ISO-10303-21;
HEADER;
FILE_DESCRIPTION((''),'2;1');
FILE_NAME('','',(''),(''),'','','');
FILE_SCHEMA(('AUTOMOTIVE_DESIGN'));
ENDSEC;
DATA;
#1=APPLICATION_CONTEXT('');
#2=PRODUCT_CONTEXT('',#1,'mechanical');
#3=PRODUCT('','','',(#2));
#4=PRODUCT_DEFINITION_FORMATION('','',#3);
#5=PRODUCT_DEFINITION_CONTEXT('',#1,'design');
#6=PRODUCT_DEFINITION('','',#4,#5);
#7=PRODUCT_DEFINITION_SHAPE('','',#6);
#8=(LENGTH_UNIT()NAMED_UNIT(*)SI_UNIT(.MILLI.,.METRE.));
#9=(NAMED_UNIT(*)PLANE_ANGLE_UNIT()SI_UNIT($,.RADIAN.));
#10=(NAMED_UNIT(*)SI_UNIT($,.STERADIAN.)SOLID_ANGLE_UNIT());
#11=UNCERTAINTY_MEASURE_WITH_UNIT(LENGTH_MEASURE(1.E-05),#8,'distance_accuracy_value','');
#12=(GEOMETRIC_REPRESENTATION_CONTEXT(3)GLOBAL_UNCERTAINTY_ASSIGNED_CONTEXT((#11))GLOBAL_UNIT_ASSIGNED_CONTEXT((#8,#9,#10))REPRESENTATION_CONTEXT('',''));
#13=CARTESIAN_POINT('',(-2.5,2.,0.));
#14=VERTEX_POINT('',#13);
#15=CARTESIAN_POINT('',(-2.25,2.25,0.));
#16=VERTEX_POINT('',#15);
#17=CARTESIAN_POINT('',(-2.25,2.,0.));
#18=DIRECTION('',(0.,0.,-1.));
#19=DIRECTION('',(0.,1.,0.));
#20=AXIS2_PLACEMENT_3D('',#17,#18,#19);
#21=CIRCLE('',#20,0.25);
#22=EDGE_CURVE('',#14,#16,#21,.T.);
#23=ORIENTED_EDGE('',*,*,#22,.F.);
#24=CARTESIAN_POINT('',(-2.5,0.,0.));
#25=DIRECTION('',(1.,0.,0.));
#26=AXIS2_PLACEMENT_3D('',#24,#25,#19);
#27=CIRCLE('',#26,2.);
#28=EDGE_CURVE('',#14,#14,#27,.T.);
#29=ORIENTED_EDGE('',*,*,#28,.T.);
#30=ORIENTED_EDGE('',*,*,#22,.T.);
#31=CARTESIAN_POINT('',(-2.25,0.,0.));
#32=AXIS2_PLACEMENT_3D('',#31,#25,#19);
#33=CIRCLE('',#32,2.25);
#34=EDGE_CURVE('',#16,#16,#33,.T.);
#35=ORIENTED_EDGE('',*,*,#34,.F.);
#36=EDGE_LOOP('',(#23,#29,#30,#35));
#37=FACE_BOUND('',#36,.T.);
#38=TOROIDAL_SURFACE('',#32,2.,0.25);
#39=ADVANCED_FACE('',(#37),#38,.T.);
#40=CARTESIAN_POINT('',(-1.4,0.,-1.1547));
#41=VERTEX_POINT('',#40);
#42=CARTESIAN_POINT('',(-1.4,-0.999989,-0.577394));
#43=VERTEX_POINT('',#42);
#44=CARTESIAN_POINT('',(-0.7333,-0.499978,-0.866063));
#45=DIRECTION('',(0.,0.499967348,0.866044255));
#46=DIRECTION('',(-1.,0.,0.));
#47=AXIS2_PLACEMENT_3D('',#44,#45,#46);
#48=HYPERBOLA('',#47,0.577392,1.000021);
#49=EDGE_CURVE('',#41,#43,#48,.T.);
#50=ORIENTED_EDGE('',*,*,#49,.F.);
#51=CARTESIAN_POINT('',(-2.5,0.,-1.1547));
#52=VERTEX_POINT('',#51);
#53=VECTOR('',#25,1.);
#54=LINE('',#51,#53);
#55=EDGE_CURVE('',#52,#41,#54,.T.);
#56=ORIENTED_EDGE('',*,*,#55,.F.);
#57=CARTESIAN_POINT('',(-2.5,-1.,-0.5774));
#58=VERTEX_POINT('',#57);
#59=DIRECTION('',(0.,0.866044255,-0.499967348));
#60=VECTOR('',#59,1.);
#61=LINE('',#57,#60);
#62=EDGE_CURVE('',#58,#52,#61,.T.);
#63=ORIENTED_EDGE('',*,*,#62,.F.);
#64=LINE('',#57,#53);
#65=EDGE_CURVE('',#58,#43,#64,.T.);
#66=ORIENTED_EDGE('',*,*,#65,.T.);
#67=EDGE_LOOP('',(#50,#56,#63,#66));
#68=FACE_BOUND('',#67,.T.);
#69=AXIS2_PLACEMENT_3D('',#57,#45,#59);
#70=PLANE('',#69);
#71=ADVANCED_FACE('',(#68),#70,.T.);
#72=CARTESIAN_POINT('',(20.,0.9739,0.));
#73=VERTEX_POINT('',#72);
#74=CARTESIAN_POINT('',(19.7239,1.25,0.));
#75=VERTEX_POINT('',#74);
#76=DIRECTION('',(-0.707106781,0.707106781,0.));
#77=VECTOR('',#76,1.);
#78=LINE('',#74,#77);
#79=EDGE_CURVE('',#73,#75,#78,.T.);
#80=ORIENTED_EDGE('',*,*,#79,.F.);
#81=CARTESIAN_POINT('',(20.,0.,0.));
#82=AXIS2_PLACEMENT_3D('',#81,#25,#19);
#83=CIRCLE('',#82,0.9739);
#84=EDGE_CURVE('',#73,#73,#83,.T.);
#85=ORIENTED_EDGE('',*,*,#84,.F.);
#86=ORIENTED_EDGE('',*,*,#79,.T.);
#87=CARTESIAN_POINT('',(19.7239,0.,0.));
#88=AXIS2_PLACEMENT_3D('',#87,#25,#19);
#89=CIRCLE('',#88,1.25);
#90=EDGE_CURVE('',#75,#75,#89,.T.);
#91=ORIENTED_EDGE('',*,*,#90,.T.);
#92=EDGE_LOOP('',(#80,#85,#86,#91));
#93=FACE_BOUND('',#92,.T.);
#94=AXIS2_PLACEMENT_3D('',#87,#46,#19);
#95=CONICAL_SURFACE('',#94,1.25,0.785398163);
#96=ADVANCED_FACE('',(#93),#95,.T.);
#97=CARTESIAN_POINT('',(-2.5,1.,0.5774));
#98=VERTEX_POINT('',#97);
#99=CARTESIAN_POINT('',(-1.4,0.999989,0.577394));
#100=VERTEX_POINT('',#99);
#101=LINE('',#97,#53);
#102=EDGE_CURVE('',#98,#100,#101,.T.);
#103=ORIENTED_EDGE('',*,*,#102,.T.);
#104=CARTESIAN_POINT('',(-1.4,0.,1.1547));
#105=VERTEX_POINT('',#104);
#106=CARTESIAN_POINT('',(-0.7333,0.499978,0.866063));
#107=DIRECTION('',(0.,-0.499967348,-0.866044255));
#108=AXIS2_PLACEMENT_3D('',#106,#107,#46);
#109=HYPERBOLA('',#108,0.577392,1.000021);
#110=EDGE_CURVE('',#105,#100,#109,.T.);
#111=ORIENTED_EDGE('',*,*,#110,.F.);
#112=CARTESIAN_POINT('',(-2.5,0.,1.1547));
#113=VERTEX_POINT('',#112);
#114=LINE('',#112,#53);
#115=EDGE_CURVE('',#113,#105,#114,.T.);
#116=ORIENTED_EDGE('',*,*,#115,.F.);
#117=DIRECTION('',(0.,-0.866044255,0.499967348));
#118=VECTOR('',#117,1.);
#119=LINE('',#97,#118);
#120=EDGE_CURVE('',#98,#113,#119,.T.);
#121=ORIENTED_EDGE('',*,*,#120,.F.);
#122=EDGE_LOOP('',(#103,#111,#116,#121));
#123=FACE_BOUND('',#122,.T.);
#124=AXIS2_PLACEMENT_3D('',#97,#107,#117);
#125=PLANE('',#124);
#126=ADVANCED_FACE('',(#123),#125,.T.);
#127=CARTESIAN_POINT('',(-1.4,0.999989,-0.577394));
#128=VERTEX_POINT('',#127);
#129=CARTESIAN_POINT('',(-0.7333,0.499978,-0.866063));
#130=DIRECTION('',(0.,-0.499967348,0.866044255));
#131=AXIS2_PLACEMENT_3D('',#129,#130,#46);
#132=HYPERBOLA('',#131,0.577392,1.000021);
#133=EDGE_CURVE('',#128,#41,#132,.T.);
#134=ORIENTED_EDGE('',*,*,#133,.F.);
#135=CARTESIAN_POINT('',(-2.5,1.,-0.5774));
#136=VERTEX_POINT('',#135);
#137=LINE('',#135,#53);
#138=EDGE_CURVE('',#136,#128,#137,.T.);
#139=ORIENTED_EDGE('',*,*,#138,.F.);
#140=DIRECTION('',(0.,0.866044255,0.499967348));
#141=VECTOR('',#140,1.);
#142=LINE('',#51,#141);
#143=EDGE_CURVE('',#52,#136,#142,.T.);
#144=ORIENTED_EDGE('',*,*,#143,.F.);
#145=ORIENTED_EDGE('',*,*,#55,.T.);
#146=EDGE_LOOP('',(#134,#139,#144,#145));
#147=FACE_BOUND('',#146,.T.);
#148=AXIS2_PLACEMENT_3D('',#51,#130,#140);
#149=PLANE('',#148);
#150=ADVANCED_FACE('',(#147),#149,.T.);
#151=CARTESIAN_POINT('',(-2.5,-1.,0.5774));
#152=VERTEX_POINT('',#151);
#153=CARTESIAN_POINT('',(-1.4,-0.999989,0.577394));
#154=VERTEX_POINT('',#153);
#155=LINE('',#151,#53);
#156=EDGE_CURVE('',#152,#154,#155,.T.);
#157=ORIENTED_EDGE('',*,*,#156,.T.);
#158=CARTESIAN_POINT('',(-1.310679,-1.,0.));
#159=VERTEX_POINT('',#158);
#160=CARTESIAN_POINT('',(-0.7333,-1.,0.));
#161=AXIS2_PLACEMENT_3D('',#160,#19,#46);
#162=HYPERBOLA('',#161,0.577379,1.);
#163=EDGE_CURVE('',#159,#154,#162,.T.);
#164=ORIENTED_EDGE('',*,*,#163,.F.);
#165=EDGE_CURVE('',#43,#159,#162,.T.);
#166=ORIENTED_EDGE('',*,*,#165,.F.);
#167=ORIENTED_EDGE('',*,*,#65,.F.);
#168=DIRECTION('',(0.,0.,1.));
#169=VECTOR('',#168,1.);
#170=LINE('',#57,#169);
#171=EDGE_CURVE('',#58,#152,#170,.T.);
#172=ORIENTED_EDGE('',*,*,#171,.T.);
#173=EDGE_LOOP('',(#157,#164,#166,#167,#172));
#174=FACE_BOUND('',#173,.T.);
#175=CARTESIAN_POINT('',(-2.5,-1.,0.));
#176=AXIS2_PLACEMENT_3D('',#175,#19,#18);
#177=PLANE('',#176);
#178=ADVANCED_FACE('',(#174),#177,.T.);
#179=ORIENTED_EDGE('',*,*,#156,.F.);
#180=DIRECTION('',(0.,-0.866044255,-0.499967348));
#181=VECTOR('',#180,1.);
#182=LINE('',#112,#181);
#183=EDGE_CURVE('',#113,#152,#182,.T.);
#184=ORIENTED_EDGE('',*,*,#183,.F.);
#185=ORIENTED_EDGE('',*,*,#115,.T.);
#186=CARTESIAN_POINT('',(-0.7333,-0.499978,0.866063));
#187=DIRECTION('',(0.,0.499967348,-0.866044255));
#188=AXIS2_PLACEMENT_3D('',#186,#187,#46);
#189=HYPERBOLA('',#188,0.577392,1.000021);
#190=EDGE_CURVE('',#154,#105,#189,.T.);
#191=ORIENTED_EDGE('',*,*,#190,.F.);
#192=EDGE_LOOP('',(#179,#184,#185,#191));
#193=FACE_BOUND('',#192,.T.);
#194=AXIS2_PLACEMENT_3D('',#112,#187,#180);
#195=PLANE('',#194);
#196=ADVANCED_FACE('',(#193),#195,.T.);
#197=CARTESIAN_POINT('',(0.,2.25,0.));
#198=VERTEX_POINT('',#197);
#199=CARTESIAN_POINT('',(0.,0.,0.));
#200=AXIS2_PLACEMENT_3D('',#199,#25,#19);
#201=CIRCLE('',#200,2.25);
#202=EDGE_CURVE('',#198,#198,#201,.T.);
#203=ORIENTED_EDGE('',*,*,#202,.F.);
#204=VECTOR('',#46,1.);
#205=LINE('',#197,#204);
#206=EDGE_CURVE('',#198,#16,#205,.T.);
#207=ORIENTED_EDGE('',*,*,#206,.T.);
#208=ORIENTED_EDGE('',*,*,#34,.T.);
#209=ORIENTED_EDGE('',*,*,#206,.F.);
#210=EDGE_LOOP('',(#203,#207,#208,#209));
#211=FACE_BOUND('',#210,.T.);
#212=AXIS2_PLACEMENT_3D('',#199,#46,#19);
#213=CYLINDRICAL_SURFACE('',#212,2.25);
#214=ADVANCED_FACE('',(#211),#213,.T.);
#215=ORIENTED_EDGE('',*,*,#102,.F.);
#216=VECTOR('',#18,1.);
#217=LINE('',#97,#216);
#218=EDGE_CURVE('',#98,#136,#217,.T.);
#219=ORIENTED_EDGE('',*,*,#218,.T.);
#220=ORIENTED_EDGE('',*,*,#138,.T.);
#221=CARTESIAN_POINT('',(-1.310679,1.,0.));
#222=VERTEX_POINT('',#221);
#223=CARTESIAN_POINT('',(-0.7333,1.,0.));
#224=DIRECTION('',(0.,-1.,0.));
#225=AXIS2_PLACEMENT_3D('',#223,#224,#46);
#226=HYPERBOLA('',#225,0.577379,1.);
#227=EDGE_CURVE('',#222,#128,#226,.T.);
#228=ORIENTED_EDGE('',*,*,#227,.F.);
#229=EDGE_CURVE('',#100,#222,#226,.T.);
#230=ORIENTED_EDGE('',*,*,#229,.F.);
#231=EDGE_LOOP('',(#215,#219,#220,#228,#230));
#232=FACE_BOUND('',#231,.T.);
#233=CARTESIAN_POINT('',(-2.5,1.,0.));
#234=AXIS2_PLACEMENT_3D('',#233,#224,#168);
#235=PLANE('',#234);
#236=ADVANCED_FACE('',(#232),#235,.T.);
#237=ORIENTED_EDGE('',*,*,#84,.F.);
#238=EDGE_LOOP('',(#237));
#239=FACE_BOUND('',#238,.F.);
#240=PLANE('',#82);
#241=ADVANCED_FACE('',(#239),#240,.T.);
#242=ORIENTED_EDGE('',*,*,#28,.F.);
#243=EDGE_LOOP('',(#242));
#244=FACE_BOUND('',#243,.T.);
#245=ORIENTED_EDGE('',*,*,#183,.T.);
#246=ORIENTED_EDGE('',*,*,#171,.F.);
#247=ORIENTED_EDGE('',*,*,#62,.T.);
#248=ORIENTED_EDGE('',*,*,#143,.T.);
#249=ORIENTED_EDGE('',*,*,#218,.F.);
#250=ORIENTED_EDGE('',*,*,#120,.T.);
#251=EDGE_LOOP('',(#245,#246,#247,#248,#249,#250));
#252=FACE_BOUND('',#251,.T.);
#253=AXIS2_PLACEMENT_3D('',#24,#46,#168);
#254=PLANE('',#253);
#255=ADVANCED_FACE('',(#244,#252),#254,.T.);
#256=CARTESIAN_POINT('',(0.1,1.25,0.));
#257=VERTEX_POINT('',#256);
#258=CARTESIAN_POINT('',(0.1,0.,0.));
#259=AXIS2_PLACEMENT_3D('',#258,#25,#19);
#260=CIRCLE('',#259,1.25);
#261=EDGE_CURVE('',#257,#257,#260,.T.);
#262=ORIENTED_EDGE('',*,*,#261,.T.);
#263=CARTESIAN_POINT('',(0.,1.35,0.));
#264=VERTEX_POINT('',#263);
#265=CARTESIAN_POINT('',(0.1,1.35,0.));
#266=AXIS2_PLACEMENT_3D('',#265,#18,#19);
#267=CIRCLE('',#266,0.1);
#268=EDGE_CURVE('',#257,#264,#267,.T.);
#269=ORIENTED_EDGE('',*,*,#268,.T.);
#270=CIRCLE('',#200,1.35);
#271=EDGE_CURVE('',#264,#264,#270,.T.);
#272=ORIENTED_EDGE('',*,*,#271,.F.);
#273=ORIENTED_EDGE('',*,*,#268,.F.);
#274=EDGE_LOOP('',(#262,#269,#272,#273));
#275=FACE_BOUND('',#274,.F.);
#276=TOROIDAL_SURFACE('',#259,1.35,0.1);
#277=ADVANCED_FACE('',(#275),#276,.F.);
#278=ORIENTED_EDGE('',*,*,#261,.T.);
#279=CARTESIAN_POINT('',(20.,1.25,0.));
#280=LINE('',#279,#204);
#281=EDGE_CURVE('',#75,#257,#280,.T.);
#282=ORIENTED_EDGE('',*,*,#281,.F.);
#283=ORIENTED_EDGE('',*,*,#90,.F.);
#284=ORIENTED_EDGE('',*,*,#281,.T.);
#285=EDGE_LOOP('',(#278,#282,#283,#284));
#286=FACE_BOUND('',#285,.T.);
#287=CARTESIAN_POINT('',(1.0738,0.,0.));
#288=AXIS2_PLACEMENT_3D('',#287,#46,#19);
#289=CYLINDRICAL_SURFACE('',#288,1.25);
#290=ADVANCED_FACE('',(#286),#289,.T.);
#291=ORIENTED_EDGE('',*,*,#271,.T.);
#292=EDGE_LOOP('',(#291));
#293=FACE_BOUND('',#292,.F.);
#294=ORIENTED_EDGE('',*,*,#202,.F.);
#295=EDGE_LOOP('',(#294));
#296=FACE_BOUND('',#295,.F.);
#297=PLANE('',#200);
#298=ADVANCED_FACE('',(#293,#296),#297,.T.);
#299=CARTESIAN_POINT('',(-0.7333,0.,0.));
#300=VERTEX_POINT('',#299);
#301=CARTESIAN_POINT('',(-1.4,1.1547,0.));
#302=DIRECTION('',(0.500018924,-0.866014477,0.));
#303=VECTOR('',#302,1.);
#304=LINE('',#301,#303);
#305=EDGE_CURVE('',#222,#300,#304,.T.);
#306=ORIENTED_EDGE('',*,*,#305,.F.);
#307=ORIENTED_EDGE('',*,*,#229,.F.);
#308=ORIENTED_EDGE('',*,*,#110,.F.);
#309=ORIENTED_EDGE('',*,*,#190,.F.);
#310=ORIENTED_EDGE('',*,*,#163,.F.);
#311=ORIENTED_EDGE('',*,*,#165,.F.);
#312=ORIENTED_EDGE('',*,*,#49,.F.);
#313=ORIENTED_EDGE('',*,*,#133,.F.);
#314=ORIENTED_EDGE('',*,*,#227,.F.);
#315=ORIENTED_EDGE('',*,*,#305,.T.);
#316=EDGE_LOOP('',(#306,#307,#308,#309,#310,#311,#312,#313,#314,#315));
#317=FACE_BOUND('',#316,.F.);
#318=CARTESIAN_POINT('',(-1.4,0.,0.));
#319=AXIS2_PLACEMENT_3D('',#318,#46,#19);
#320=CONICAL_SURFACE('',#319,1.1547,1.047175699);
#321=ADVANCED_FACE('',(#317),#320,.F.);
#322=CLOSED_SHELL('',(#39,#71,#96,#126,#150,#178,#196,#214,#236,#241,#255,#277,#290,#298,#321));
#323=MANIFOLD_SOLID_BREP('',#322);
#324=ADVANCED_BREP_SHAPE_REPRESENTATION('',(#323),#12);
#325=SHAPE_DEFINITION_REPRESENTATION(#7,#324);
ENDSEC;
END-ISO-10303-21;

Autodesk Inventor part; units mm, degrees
ref_plane "YZ Plane" through (0, 0, 0) normal (1, 0, 0) x (0, 1, 0)
ref_plane "XZ Plane" through (0, 0, 0) normal (0, 1, 0) x (-1, 0, 0)
sketch "スケッチ1" plane through (0, 0, 0) normal (0, 0, 1) x (1, 0, 0)
  line L0 (-0.7333, 0) -> (20, 0)
  line L1 (20, 0) -> (20, 1.25)
  line L2 (20, 1.25) -> (1.35, 1.25)
  line L3 (1.35, 1.25) -> (1.0738, 1.25)
  line L4 (1.0738, 1.25) -> (0, 1.25)
  line L5 (0, 1.25) -> (0, 2.25)
  line L6 (0, 2.25) -> (-2.5, 2.25)
  line L7 (-2.5, 2.25) -> (-2.5, 1.1547)
  line L8 (-2.5, 1.1547) -> (-1.4, 1.1547)
  line L9 (-1.4, 1.1547) -> (-0.7333, 0)
  line L10 (-7, 0) -> (24.5, 0) projected
  line L11 (0, -0.45) -> (0, 2.7) projected
  line L12 (1.35, 1.25) -> (0, 1.25) construction
  dimension "d1" = 18.65
  dimension "d2" = 0.2762
  dimension "d3" = 2.5
  dimension "d4" = 1.1
  dimension "d5" = 60
  dimension "d6" = 2.5
  dimension "d7" = 2.5
  dimension "d8" = 2.3094
  dimension "d9" = 4.5
  dimension "d26" = 20
revolve "ボディ" add sketch "スケッチ1" angle 360 about axis through (-0.7333, 0, 0) along (1, 0, 0)
sketch "スケッチ2" plane through (-2.5, 0, 0) normal (-1, 0, 0) x (0, 0, 1)
  circle A0 centre (0, 0) radius 1.1547 projected
  line L0 (0, -3.15) -> (0, 3.15) projected
  line L1 (-3.15, 0) -> (3.15, 0) projected
  line L2 (1.1547, 0) -> (0.5774, -1)
  line L3 (0.5774, -1) -> (-0.5774, -1)
  line L4 (-0.5774, -1) -> (-1.1547, 0)
  line L5 (-1.1547, 0) -> (-0.5774, 1)
  line L6 (-0.5774, 1) -> (0.5774, 1)
  line L7 (0.5774, 1) -> (1.1547, 0)
extrude "長穴" add sketch "スケッチ2" against normal up to next contours L7 A0 | A0 L2 | L6 L0 A0 | A0 L0 L3 | L0 L6 A0 | A0 L3 L0 | L4 A0 | A0 L5
fillet "フィレット1" radius 0.25 1 edges at (-2.5, -2.25, 0)
thread "ねじ" size "M2.5x0.45" class "6g" standard "ISO Metric profile" length 18.65
chamfer "面取り1" distance 0.2761 distance2 0.2761 1 edges at (20, -1.25, 0) measured on face at (20, -0.2763, -0.017)
ref_plane "Work Plane1" through (29, 0, 0) normal (0, -1, 0) x (1, 0, 0)
fillet "Fillet2" radius 0.1 1 edges at (0, -1.25, 0)
equation "\"d30\" = R"
equation "\"d17\" = RR"
equation "\"d13\" = GEL"
equation "\"d15\" = -0.5 * SPD + 0.5 * GD"
equation "\"d16\" = GUL"
equation "\"d1\" = GEL"
equation "\"d3\" = KOH"
equation "\"d4\" = INTI"
equation "\"d6\" = GD"
equation "\"d7\" = BDM"
equation "\"d8\" = 1.1547 * SW"
equation "\"d9\" = KOD"
equation "\"d26\" = NLG"
equation "\"GD\" = NND"
equation "\"NLG\" = 20"
equation "\"GEL\" = 18.65"
equation "\"KOD\" = 4.5"
equation "\"KOH\" = 2.5"
equation "\"INTI\" = 1.1"
equation "\"GAL\" = 0.61345 * PTC"
equation "\"GUL\" = 0.61345 * PTC"
equation "\"BDM\" = NND"
equation "\"SW\" = 2"
equation "\"RR\" = 0.25"
equation "\"SPD\" = NND - 1.2269 * PTC"
equation "\"R\" = 0.1"
equation "\"PHH\" = 0.1"
equation "\"GD1\" = THREADDIA - 1.2269 * PTC"
equation "\"THREADDIA\" = 2.5"
equation "\"FAWI\" = 45deg"
equation "\"PTC\" = 0.45"
equation "\"NND\" = 2.5"
equation "\"TOA\" = 30deg"
equation "\"E0\" = 1.155 * SW"
properties part number "JIS B 1176 - M2.5 x 20" material "鋼、軟鋼"
